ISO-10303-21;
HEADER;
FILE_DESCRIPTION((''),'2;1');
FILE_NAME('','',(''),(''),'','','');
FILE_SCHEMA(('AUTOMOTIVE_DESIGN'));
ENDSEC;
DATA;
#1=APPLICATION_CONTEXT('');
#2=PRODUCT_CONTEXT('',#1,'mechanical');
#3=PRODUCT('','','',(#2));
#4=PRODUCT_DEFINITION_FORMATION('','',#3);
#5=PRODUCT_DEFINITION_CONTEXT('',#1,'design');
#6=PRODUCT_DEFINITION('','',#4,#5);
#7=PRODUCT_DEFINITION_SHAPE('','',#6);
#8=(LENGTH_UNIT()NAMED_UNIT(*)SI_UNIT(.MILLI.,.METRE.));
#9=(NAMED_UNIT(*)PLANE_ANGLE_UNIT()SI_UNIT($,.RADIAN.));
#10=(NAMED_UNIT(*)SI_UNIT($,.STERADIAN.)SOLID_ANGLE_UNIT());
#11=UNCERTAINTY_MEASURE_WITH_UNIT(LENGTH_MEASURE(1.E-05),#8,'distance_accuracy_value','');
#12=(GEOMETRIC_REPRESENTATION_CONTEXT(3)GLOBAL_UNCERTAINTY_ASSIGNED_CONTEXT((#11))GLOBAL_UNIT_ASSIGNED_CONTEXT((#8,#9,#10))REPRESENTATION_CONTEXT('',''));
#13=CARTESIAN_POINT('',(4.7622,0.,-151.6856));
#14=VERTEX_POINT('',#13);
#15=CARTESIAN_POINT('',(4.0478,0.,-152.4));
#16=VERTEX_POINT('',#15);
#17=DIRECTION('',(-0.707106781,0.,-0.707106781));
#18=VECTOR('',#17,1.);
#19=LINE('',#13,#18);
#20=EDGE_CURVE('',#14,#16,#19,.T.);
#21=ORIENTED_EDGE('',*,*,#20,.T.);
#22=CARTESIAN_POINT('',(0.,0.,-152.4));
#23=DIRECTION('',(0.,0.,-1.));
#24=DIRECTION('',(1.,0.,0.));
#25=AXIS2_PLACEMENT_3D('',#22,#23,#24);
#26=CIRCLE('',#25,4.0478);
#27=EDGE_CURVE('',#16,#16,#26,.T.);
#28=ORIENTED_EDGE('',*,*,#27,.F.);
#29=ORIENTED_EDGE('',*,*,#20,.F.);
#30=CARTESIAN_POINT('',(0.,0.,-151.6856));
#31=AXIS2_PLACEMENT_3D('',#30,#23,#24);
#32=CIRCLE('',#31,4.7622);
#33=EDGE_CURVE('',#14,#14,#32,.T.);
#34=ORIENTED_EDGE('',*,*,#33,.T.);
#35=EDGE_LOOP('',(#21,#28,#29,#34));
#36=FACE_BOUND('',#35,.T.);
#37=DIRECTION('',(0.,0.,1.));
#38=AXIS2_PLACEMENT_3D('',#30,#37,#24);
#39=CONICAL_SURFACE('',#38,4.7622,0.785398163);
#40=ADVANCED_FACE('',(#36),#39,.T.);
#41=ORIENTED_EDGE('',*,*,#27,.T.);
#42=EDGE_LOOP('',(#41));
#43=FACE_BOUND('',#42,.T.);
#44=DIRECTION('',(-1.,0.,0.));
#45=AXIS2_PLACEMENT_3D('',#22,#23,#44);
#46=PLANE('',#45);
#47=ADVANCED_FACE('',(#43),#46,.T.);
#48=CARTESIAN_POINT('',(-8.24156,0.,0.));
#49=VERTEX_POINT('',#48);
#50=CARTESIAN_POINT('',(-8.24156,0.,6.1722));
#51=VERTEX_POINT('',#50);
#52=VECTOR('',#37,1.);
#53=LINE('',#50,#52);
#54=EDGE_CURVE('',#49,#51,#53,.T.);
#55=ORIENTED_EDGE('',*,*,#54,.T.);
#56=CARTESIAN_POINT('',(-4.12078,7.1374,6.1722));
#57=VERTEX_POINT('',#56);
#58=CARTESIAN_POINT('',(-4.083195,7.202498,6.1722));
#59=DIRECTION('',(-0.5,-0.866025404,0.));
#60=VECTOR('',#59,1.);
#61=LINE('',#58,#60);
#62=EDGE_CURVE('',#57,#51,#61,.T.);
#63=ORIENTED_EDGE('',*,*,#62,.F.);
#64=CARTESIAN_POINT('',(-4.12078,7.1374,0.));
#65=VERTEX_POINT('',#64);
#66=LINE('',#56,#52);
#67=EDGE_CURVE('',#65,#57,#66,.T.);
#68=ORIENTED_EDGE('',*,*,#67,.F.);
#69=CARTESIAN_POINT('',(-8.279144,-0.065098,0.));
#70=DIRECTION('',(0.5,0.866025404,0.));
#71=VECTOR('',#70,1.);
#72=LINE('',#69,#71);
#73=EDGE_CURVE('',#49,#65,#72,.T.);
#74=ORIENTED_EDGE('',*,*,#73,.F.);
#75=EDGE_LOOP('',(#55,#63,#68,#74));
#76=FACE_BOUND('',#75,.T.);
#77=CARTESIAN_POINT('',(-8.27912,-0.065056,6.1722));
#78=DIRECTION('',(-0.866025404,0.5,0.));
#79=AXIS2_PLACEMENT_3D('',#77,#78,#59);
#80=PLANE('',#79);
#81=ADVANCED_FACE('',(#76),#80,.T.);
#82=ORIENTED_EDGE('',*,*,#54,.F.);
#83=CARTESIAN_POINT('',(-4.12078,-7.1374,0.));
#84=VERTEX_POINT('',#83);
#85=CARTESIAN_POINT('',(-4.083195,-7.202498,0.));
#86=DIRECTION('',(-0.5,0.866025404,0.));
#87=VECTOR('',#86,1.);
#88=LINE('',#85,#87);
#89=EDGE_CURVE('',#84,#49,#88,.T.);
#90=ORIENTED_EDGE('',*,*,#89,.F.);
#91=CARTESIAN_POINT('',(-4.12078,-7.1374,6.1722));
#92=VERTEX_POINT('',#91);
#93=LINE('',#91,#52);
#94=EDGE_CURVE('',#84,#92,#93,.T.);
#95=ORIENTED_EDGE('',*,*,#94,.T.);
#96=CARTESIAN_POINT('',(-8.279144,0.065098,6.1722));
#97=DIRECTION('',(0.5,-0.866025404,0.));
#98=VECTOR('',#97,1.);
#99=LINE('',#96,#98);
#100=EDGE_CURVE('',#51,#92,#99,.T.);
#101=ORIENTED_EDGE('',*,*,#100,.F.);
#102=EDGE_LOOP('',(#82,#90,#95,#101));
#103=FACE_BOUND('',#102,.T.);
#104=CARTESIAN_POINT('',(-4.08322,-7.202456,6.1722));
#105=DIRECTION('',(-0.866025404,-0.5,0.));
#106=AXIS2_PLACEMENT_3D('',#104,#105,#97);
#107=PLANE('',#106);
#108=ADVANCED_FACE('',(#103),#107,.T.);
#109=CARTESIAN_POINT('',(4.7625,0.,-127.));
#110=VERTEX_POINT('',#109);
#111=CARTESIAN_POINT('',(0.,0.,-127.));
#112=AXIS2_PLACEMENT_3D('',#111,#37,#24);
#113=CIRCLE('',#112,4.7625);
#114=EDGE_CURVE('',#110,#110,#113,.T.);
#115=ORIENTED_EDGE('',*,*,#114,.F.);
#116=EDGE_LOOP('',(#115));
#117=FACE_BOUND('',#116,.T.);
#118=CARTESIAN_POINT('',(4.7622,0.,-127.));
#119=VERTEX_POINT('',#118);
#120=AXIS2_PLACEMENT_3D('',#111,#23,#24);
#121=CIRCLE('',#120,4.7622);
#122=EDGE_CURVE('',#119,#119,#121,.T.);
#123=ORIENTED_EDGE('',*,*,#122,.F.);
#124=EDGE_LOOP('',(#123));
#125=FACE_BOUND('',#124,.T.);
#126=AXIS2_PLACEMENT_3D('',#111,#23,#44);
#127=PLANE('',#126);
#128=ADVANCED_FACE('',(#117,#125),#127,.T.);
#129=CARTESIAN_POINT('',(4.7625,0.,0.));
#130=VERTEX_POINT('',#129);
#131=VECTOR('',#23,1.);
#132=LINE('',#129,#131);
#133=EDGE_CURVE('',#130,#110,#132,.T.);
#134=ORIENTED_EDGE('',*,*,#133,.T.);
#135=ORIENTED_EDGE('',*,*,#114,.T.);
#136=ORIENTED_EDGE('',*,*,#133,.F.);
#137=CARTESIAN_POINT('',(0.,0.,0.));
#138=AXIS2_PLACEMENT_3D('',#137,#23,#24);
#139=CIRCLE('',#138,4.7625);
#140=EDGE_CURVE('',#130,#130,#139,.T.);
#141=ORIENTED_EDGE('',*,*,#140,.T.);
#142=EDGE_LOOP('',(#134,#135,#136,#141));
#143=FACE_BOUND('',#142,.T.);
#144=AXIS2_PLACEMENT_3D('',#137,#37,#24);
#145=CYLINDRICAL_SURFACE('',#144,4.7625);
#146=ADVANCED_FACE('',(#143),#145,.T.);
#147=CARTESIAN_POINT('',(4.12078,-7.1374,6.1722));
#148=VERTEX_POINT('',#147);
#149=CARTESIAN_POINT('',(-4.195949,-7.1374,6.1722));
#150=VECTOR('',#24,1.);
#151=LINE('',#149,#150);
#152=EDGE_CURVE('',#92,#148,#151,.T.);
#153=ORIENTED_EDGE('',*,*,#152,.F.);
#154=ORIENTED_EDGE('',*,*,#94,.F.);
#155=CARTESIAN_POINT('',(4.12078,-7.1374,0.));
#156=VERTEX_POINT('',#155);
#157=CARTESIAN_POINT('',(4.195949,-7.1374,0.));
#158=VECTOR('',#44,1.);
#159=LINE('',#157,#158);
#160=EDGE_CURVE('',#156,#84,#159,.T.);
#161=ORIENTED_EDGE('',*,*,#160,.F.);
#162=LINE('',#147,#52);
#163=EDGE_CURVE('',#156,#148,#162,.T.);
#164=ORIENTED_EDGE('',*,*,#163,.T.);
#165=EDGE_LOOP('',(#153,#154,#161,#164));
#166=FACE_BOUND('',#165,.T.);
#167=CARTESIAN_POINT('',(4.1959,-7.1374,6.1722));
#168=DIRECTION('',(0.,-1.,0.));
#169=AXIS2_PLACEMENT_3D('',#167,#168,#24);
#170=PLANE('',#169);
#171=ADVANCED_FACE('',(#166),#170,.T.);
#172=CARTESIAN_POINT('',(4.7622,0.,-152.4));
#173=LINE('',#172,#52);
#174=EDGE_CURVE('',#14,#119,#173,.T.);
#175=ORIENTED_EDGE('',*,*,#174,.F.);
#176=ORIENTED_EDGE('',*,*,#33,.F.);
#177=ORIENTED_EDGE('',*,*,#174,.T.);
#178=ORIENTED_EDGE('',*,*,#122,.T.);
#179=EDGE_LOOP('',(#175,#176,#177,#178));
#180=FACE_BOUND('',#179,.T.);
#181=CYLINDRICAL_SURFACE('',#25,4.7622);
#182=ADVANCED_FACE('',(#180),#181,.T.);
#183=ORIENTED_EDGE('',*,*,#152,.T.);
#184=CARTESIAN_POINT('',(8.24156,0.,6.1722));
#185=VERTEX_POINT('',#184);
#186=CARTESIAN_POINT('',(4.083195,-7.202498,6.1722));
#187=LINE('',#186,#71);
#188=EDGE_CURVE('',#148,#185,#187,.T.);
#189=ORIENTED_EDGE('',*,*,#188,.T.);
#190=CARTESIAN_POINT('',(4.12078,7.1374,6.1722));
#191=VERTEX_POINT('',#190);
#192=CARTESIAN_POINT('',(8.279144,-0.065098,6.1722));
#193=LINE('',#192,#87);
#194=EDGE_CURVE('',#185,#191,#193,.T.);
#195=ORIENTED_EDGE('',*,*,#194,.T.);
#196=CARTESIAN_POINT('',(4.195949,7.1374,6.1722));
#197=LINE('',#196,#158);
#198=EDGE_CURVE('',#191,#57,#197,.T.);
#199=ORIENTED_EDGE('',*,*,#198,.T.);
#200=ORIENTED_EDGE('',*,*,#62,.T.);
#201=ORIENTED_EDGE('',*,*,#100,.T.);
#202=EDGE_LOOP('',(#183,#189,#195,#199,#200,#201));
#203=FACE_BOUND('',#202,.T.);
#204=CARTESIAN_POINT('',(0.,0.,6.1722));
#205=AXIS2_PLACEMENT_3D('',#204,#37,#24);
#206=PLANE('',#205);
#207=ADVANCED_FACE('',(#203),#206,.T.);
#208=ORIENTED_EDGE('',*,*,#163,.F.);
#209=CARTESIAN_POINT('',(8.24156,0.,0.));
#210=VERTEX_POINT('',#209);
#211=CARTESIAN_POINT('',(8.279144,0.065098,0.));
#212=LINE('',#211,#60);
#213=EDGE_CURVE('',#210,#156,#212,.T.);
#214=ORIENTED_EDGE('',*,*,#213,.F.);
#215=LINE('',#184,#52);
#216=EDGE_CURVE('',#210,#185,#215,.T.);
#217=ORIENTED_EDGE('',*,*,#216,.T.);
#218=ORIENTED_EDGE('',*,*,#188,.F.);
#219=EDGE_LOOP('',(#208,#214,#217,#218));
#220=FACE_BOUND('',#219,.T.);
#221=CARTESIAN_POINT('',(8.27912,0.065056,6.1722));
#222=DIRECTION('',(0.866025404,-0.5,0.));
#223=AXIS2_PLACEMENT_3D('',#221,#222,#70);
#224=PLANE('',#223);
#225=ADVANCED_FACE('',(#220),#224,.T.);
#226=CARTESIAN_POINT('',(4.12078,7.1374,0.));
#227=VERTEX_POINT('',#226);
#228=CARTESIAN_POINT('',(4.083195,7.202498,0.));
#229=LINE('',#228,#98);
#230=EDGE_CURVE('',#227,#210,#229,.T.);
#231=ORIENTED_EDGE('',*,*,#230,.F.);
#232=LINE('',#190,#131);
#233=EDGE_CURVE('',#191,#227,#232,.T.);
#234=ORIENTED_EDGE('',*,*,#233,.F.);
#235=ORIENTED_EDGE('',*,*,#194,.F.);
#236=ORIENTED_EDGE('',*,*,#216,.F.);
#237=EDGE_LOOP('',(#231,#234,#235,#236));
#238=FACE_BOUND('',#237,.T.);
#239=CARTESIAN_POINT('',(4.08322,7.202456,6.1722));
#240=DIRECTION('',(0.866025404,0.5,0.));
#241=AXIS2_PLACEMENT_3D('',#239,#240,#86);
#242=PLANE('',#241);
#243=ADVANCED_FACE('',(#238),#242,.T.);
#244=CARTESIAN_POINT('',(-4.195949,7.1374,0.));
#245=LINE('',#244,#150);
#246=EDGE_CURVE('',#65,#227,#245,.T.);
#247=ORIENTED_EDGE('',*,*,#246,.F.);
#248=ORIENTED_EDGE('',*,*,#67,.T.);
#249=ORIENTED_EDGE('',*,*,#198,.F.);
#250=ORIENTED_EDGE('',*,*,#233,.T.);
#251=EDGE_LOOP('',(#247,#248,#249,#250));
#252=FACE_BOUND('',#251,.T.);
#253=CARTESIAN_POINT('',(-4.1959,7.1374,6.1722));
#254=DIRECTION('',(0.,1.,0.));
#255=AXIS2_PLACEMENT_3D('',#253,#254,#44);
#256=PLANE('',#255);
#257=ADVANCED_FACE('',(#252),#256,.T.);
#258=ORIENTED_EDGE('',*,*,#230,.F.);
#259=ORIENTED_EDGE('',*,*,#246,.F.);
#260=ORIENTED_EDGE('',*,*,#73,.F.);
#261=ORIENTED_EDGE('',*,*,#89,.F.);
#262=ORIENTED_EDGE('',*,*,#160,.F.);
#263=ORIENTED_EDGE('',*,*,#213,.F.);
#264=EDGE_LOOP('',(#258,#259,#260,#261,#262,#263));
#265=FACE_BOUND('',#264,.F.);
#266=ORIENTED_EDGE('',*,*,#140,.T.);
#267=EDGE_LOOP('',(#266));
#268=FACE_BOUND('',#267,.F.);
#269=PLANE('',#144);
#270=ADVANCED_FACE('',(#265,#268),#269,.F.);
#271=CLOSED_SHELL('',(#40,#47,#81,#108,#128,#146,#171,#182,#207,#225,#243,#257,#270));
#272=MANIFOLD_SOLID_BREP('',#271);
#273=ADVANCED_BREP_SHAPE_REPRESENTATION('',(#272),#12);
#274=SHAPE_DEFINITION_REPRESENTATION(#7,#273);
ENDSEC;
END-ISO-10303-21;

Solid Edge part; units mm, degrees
sketch "Sketch1" plane through (0, 0, 0) normal (0, 0, 1) x (1, 0, 0)
  circle A0 centre (0, 0) radius 8.2794
  dimension "D1" = 16.5588
extrude "Protrusion1" add sketch "Sketch1" along normal blind 6.1722
sketch "Sketch2" plane through (0, 0, 0) normal (0, 0, -1) x (1, 0, 0)
  circle A0 centre (0, 0) radius 4.7625
extrude "Protrusion2" add sketch "Sketch2" along normal blind 152.4
sketch "Sketch3" plane through (0, 0, -152.4) normal (0, 0, -1) x (1, 0, 0)
  circle A0 centre (0, 0) radius 4.7622
extrude "Cutout1" cut sketch "Sketch3" against normal blind 25.4 flip side to cut
chamfer "Chamfer_1" distance 0.7144 angle 45 1 edges at (-4.7622, 0, -152.4)
sketch "Sketch4" plane through (0, 0, 6.1722) normal (0, 0, 1) x (1, 0, 0)
  line L0 (-4.1959, 7.1374) -> (4.1959, 7.1374)
  dimension "D1" = 14.2748
extrude "Cutout2" cut sketch "Sketch4" against normal up to next material side at (0, 7.1874, 6.1722)
pattern_circular "Pattern1" count 6 over 360 about axis through (0, 0, 6.1722) along (0, 0, 1) of "Cutout2"
properties part number "119176"
